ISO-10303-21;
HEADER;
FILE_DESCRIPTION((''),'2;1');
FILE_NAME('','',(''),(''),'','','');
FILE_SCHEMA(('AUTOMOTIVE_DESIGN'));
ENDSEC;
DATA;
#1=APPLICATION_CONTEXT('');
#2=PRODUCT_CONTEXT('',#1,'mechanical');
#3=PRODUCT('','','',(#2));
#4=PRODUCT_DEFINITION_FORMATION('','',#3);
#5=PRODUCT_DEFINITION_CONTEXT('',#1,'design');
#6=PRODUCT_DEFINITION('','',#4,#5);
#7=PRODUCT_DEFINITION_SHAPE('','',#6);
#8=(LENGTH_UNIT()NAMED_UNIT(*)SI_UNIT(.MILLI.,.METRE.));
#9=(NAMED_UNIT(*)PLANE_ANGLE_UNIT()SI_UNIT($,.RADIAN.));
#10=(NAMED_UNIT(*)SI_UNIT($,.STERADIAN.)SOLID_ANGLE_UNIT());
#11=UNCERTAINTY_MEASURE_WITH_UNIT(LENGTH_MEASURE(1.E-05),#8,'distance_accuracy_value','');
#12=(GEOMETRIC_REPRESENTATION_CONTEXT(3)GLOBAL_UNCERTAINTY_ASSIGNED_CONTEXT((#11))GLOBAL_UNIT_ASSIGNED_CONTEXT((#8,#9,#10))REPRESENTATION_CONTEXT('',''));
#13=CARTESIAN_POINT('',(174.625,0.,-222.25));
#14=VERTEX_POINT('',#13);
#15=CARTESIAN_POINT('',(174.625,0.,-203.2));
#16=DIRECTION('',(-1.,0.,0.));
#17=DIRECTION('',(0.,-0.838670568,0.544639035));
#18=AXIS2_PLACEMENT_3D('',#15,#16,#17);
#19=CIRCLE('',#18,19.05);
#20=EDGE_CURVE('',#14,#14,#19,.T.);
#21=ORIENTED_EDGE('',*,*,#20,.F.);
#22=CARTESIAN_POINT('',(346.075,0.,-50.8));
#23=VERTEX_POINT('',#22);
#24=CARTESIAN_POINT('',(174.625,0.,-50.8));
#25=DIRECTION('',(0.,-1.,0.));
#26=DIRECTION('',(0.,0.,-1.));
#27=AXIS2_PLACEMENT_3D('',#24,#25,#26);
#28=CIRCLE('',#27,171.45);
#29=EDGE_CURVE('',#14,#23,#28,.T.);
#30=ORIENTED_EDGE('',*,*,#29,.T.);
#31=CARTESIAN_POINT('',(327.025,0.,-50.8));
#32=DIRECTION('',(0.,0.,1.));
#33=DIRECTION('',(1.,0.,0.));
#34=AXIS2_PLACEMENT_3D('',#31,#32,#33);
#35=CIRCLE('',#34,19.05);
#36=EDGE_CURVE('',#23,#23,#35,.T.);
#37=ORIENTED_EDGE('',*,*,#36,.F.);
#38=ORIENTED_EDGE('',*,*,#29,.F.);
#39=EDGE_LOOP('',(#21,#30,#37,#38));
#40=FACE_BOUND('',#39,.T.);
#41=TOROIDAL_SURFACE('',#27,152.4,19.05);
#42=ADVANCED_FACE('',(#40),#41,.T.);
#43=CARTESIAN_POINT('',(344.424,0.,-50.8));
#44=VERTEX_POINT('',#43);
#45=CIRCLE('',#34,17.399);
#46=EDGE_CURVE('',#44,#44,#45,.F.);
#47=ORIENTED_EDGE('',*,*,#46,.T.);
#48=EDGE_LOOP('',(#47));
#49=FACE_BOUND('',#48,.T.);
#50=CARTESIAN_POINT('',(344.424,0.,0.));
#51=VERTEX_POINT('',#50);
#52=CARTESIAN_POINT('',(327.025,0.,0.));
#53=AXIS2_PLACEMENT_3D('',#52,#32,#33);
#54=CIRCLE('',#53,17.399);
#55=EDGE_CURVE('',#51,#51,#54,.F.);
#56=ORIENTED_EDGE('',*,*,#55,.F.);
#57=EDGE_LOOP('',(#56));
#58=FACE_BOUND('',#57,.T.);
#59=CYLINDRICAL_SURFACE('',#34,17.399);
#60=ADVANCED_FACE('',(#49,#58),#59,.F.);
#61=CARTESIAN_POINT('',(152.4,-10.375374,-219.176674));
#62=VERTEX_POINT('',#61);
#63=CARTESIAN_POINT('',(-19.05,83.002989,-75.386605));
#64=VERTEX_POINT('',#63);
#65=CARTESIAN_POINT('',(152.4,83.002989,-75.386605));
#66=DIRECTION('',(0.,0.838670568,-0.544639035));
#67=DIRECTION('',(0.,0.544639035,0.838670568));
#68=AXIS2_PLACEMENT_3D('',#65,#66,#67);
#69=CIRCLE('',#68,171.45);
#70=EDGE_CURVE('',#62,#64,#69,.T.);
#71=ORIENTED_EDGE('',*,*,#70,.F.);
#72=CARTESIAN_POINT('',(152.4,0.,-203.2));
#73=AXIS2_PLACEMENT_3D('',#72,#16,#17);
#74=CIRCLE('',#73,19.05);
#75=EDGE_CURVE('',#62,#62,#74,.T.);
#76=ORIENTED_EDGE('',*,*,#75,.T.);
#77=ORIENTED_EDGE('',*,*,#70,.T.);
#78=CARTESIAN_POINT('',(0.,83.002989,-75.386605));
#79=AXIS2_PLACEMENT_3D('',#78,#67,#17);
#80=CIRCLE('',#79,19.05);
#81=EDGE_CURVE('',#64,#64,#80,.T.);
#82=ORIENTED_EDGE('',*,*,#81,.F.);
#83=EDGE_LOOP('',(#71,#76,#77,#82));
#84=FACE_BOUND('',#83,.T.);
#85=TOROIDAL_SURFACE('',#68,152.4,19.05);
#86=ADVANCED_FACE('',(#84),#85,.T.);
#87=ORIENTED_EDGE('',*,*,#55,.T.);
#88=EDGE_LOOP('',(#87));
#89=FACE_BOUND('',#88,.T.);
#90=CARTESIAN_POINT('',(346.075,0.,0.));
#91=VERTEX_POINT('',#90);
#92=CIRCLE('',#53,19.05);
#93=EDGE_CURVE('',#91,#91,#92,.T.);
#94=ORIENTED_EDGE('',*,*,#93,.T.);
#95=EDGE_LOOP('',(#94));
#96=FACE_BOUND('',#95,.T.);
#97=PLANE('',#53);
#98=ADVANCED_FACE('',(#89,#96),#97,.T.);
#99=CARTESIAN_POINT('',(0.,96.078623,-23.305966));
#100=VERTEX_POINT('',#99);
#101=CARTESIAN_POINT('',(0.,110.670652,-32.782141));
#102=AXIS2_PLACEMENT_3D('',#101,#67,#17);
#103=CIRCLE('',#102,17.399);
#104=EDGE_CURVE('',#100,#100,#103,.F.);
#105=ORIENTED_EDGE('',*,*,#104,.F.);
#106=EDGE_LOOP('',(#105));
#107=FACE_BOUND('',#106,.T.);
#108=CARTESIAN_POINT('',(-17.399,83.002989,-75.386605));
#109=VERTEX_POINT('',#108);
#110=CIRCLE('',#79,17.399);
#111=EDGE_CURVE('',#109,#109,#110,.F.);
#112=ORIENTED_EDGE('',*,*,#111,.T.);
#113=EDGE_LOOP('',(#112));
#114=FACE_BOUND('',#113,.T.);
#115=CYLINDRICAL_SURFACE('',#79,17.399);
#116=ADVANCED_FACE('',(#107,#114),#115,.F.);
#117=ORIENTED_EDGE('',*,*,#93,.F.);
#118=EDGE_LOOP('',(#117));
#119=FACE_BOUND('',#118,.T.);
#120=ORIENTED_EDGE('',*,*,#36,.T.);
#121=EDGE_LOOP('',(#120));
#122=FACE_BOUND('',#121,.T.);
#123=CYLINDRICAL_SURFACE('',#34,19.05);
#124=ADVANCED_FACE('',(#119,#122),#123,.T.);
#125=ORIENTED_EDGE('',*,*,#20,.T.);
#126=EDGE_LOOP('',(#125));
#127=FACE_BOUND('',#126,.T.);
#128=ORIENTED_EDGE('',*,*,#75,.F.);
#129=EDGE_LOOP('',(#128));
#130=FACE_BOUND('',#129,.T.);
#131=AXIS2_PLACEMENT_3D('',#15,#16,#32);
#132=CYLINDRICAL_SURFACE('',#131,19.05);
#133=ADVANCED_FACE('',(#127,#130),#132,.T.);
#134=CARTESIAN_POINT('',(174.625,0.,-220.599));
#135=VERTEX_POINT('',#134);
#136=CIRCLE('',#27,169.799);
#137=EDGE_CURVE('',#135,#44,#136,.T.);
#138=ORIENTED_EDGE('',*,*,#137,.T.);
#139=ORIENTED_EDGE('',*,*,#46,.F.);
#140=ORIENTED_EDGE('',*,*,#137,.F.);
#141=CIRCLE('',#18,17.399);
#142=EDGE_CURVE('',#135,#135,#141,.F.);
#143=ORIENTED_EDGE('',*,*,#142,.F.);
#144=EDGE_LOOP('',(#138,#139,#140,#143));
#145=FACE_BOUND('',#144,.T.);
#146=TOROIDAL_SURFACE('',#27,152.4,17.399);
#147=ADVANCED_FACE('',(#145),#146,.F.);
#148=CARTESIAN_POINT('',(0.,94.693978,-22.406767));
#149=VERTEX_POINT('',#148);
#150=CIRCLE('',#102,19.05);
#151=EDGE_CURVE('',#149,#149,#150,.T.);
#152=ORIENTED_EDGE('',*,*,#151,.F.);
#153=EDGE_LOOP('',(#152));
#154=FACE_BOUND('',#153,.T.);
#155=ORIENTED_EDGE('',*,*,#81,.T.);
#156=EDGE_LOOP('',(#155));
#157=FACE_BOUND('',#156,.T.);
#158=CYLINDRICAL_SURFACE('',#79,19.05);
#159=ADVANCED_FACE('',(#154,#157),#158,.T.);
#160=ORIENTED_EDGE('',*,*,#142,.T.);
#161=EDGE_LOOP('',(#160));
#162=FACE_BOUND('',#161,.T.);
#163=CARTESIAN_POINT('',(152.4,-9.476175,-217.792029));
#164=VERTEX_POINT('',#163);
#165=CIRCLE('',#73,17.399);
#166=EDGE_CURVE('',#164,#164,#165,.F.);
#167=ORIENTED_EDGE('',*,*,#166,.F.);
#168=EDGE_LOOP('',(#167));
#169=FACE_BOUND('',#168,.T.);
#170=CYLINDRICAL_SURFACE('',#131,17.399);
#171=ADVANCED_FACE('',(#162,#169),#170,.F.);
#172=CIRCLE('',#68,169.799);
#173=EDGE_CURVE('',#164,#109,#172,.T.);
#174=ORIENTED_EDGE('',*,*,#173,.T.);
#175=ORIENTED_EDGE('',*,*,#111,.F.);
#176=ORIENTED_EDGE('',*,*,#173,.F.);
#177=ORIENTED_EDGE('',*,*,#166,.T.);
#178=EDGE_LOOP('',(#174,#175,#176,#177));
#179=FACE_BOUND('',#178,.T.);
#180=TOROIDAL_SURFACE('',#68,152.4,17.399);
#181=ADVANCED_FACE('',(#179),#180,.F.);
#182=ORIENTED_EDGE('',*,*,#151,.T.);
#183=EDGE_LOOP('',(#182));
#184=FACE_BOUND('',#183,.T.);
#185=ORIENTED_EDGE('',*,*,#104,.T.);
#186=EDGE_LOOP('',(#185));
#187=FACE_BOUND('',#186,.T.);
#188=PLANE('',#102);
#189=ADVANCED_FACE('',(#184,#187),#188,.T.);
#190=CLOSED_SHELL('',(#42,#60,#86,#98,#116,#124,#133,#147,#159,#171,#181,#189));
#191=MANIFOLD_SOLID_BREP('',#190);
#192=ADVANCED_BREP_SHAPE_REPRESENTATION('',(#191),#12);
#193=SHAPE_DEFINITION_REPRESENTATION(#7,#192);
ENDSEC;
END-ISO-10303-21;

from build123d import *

# Parameters (mm, degrees)
SKETCH5_R            = 19.05
SKETCH5_R_2          = 17.399
SWEEP2_START         = -50.8000001
SWEEP2_OUTLINE_R     = 19.05
SWEEP2_OUTLINE_R_2   = 17.399
SWEEP2_DEPTH         = 50.8000001
SWEEP2_2_OUTLINE_R   = 19.05
SWEEP2_2_OUTLINE_R_2 = 17.399
SWEEP2_2_ANGLE       = 90


with BuildPart() as part:
    # Sweep1: sweep along a path in Sketch4
    with BuildLine(Plane(origin=(0, 92.816218496, -60.275557063), x_dir=(1, 0, 0), z_dir=(0, 0.8386705679454234, -0.5446390350150281))) as sweep1_path:
        Line((174.625, 170.417859407), (152.4, 170.417859407))
        ThreePointArc((152.4, 170.417859407), (44.636926547, 125.780932859), (0, 18.017859407))
        Line((0, 18.017859407), (0, -32.782140593))
    # Sketch5 → Sweep1 (sweep)
    with BuildSketch(Plane(origin=(327.025, 110.670651915, -32.782140593), x_dir=(1, 0, 0), z_dir=(0, 0.5446390350150281, 0.8386705679454234))):
        with Locations((-327.025, 0)):
            Circle(SKETCH5_R)
        with Locations((-327.025, 0)):
            Circle(SKETCH5_R_2, mode=Mode.SUBTRACT)
    sweep(path=sweep1_path.line)



with BuildPart() as body_2:
    # Sweep2: read off the stored shape, not the designer's step
    # Sweep2 outline → Sweep2 (new body)
    with BuildSketch(Plane.XY.offset(SWEEP2_START)):
        with Locations((327.025, 0)):
            Circle(SWEEP2_OUTLINE_R)
        with Locations((327.025, 0)):
            Circle(SWEEP2_OUTLINE_R_2, mode=Mode.SUBTRACT)
    extrude(amount=SWEEP2_DEPTH)


with BuildPart() as part_1:
    add(part.part)

    add(body_2.part)  # Sweep2 2 merges body 2
    # Sweep2 2 outline → Sweep2 2 (revolve)
    with BuildSketch(Plane(origin=(174.625, 0, -50.8), x_dir=(1, 0, 0), z_dir=(0, 0, 1))):
        with Locations((152.4, 0)):
            Circle(SWEEP2_2_OUTLINE_R)
        with Locations((152.4, 0)):
            Circle(SWEEP2_2_OUTLINE_R_2, mode=Mode.SUBTRACT)
    revolve(axis=Axis((174.625, 0, -50.8), (0, 1, 0)), revolution_arc=SWEEP2_2_ANGLE)


solid = part_1.part
